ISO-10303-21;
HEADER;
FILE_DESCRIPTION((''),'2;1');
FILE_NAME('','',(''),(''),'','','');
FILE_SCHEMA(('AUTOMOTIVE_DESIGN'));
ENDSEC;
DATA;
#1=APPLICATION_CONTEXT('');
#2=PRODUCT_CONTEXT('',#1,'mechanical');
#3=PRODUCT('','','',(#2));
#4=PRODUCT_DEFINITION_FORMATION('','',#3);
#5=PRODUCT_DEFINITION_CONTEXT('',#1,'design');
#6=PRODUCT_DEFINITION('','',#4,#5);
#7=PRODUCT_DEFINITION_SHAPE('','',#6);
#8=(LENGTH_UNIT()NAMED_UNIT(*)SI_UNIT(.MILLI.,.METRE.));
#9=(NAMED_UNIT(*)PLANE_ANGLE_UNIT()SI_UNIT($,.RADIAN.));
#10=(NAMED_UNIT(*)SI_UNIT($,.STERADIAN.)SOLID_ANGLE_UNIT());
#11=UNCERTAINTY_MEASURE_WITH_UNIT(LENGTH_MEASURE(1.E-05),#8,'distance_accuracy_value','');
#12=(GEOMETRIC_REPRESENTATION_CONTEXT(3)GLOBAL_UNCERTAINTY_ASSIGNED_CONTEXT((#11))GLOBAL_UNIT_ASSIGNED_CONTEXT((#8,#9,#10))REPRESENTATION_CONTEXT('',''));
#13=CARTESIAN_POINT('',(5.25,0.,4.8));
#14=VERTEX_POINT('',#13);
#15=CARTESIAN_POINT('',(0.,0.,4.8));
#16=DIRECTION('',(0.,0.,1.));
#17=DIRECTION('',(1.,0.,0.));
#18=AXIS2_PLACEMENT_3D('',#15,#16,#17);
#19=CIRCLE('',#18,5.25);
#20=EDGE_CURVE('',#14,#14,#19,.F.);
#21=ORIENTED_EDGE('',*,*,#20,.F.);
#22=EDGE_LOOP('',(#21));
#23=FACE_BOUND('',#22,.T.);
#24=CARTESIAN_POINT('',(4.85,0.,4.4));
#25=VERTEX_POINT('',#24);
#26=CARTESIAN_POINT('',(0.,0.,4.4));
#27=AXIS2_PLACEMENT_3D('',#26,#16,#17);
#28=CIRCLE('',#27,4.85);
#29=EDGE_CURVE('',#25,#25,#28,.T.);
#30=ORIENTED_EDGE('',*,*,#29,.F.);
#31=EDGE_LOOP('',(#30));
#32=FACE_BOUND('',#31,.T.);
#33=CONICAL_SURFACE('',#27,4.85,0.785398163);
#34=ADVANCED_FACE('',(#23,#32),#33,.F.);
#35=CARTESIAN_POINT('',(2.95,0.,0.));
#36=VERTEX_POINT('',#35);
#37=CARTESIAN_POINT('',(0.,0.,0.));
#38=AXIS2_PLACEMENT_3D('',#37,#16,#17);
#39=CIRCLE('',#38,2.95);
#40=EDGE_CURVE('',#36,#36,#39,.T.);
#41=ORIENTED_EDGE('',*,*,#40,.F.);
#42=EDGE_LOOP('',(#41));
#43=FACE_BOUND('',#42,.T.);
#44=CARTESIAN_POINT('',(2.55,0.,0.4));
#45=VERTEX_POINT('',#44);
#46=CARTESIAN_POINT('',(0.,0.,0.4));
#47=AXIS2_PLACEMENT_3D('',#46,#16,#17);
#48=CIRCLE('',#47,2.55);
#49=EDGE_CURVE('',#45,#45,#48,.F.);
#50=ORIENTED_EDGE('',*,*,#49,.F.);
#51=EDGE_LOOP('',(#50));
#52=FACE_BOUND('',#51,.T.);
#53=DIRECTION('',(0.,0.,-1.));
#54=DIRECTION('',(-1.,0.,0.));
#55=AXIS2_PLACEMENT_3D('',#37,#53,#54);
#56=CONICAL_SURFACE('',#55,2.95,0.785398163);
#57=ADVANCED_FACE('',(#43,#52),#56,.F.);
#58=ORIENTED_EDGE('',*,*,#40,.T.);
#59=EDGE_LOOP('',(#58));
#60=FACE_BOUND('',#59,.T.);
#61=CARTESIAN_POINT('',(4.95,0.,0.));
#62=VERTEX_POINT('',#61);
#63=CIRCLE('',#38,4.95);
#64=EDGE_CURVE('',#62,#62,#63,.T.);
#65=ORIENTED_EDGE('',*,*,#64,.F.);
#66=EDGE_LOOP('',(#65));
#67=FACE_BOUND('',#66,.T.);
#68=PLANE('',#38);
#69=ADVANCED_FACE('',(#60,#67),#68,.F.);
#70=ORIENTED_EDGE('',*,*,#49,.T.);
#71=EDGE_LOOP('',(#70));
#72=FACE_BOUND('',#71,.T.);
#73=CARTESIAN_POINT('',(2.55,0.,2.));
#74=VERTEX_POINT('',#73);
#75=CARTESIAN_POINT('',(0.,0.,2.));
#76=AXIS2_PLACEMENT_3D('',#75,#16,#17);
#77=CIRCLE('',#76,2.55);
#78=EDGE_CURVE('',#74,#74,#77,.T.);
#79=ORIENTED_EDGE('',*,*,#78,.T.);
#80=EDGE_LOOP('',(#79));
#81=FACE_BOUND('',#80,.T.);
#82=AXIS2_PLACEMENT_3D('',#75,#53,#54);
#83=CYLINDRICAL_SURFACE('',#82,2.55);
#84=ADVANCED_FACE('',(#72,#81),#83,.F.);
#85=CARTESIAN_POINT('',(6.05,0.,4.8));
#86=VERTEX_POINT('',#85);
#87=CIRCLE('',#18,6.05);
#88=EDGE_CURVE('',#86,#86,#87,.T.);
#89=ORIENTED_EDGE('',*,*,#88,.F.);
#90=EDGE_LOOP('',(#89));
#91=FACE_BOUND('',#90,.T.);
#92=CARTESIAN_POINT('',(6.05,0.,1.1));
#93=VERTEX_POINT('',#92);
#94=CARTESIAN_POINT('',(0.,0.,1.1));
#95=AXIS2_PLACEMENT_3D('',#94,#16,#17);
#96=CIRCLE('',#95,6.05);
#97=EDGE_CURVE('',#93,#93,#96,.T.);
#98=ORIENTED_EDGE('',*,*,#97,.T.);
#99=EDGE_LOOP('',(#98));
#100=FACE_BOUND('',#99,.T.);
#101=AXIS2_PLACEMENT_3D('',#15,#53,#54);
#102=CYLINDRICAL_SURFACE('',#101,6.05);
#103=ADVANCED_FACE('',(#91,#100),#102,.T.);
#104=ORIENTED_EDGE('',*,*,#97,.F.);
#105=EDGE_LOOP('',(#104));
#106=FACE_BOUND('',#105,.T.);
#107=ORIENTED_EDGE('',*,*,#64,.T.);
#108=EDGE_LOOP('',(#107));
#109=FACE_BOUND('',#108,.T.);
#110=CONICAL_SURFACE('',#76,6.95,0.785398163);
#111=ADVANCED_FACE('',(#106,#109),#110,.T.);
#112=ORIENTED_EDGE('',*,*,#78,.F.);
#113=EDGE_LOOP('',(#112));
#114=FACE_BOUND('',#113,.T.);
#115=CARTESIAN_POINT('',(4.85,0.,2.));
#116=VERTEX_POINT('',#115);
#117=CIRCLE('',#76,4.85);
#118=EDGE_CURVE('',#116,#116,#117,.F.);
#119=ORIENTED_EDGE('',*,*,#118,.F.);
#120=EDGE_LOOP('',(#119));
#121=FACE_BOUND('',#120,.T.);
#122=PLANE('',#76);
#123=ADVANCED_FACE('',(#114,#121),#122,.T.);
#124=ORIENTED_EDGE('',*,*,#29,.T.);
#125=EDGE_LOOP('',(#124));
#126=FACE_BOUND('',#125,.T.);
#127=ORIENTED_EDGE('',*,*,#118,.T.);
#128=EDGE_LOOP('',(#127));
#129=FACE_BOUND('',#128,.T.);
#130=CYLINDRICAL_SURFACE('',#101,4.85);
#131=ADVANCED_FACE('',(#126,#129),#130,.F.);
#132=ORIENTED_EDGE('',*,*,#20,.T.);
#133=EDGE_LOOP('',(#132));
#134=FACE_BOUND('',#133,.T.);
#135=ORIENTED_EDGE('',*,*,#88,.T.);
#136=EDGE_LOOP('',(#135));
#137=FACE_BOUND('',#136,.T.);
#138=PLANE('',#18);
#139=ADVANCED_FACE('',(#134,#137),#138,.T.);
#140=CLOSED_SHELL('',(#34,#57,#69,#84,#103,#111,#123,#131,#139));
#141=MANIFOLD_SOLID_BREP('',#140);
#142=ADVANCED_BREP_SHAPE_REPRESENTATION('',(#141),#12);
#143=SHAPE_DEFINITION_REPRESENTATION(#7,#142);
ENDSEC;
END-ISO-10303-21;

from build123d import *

# Parameters (mm, degrees)
ESQUISSE1_R        = 4.95
ESQUISSE1_R_2      = 2.55
BOSS_EXTRU_1_DEPTH = 2
ESQUISSE2_R        = 6.05
ESQUISSE2_R_2      = 4.85
BOSS_EXTRU_2_DEPTH = 2.8
CHANFREIN1_SIZE    = 2
CHANFREIN2_SIZE    = 0.4


with BuildPart() as part:
    # Esquisse1 → Boss.-Extru.1 (new body)
    with BuildSketch(Plane.XY):
        Circle(ESQUISSE1_R)
        Circle(ESQUISSE1_R_2, mode=Mode.SUBTRACT)
    extrude(amount=BOSS_EXTRU_1_DEPTH)

    # Esquisse2 → Boss.-Extru.2 (add)
    with BuildSketch(Plane.XY.offset(2)):
        Circle(ESQUISSE2_R)
        Circle(ESQUISSE2_R_2, mode=Mode.SUBTRACT)
    extrude(amount=BOSS_EXTRU_2_DEPTH)

    # Chanfrein1
    # the kernel refuses this chamfer: 2 mm, written as the material it adds along each edge
    with BuildSketch(Plane(origin=(0, 0, 2), x_dir=(1, 0, 0), z_dir=(0, -1, 0))) as chanfrein1_piece_1_section:
        Polygon((4.95, -CHANFREIN1_SIZE), (4.95 + CHANFREIN1_SIZE, 0), (4.95, 0), align=None)
    chanfrein1_piece_1 = revolve(axis=Axis((0, 0, 2), (0, 0, 1)), mode=Mode.PRIVATE)
    chanfrein1_piece_1 = split(chanfrein1_piece_1, bisect_by=Plane(origin=(-5.472506069, 0, 0), z_dir=(0, 0, 1)), keep=Keep.TOP, mode=Mode.PRIVATE)
    chanfrein1_piece_1 = chanfrein1_piece_1 & Plane(origin=(0, 0, 0.577493931), x_dir=(1, 0, 0), z_dir=(0, 0, -1)) * Cylinder(6.05, 28, mode=Mode.PRIVATE)
    add(chanfrein1_piece_1)

    # Chanfrein2
    chanfrein2_edges = [part.edges().sort_by_distance(p)[0] for p in [
        (-4.85, 0, 4.8),
        (-2.55, 0, 0),
    ]]
    chamfer(chanfrein2_edges, length=CHANFREIN2_SIZE)


solid = part.part
